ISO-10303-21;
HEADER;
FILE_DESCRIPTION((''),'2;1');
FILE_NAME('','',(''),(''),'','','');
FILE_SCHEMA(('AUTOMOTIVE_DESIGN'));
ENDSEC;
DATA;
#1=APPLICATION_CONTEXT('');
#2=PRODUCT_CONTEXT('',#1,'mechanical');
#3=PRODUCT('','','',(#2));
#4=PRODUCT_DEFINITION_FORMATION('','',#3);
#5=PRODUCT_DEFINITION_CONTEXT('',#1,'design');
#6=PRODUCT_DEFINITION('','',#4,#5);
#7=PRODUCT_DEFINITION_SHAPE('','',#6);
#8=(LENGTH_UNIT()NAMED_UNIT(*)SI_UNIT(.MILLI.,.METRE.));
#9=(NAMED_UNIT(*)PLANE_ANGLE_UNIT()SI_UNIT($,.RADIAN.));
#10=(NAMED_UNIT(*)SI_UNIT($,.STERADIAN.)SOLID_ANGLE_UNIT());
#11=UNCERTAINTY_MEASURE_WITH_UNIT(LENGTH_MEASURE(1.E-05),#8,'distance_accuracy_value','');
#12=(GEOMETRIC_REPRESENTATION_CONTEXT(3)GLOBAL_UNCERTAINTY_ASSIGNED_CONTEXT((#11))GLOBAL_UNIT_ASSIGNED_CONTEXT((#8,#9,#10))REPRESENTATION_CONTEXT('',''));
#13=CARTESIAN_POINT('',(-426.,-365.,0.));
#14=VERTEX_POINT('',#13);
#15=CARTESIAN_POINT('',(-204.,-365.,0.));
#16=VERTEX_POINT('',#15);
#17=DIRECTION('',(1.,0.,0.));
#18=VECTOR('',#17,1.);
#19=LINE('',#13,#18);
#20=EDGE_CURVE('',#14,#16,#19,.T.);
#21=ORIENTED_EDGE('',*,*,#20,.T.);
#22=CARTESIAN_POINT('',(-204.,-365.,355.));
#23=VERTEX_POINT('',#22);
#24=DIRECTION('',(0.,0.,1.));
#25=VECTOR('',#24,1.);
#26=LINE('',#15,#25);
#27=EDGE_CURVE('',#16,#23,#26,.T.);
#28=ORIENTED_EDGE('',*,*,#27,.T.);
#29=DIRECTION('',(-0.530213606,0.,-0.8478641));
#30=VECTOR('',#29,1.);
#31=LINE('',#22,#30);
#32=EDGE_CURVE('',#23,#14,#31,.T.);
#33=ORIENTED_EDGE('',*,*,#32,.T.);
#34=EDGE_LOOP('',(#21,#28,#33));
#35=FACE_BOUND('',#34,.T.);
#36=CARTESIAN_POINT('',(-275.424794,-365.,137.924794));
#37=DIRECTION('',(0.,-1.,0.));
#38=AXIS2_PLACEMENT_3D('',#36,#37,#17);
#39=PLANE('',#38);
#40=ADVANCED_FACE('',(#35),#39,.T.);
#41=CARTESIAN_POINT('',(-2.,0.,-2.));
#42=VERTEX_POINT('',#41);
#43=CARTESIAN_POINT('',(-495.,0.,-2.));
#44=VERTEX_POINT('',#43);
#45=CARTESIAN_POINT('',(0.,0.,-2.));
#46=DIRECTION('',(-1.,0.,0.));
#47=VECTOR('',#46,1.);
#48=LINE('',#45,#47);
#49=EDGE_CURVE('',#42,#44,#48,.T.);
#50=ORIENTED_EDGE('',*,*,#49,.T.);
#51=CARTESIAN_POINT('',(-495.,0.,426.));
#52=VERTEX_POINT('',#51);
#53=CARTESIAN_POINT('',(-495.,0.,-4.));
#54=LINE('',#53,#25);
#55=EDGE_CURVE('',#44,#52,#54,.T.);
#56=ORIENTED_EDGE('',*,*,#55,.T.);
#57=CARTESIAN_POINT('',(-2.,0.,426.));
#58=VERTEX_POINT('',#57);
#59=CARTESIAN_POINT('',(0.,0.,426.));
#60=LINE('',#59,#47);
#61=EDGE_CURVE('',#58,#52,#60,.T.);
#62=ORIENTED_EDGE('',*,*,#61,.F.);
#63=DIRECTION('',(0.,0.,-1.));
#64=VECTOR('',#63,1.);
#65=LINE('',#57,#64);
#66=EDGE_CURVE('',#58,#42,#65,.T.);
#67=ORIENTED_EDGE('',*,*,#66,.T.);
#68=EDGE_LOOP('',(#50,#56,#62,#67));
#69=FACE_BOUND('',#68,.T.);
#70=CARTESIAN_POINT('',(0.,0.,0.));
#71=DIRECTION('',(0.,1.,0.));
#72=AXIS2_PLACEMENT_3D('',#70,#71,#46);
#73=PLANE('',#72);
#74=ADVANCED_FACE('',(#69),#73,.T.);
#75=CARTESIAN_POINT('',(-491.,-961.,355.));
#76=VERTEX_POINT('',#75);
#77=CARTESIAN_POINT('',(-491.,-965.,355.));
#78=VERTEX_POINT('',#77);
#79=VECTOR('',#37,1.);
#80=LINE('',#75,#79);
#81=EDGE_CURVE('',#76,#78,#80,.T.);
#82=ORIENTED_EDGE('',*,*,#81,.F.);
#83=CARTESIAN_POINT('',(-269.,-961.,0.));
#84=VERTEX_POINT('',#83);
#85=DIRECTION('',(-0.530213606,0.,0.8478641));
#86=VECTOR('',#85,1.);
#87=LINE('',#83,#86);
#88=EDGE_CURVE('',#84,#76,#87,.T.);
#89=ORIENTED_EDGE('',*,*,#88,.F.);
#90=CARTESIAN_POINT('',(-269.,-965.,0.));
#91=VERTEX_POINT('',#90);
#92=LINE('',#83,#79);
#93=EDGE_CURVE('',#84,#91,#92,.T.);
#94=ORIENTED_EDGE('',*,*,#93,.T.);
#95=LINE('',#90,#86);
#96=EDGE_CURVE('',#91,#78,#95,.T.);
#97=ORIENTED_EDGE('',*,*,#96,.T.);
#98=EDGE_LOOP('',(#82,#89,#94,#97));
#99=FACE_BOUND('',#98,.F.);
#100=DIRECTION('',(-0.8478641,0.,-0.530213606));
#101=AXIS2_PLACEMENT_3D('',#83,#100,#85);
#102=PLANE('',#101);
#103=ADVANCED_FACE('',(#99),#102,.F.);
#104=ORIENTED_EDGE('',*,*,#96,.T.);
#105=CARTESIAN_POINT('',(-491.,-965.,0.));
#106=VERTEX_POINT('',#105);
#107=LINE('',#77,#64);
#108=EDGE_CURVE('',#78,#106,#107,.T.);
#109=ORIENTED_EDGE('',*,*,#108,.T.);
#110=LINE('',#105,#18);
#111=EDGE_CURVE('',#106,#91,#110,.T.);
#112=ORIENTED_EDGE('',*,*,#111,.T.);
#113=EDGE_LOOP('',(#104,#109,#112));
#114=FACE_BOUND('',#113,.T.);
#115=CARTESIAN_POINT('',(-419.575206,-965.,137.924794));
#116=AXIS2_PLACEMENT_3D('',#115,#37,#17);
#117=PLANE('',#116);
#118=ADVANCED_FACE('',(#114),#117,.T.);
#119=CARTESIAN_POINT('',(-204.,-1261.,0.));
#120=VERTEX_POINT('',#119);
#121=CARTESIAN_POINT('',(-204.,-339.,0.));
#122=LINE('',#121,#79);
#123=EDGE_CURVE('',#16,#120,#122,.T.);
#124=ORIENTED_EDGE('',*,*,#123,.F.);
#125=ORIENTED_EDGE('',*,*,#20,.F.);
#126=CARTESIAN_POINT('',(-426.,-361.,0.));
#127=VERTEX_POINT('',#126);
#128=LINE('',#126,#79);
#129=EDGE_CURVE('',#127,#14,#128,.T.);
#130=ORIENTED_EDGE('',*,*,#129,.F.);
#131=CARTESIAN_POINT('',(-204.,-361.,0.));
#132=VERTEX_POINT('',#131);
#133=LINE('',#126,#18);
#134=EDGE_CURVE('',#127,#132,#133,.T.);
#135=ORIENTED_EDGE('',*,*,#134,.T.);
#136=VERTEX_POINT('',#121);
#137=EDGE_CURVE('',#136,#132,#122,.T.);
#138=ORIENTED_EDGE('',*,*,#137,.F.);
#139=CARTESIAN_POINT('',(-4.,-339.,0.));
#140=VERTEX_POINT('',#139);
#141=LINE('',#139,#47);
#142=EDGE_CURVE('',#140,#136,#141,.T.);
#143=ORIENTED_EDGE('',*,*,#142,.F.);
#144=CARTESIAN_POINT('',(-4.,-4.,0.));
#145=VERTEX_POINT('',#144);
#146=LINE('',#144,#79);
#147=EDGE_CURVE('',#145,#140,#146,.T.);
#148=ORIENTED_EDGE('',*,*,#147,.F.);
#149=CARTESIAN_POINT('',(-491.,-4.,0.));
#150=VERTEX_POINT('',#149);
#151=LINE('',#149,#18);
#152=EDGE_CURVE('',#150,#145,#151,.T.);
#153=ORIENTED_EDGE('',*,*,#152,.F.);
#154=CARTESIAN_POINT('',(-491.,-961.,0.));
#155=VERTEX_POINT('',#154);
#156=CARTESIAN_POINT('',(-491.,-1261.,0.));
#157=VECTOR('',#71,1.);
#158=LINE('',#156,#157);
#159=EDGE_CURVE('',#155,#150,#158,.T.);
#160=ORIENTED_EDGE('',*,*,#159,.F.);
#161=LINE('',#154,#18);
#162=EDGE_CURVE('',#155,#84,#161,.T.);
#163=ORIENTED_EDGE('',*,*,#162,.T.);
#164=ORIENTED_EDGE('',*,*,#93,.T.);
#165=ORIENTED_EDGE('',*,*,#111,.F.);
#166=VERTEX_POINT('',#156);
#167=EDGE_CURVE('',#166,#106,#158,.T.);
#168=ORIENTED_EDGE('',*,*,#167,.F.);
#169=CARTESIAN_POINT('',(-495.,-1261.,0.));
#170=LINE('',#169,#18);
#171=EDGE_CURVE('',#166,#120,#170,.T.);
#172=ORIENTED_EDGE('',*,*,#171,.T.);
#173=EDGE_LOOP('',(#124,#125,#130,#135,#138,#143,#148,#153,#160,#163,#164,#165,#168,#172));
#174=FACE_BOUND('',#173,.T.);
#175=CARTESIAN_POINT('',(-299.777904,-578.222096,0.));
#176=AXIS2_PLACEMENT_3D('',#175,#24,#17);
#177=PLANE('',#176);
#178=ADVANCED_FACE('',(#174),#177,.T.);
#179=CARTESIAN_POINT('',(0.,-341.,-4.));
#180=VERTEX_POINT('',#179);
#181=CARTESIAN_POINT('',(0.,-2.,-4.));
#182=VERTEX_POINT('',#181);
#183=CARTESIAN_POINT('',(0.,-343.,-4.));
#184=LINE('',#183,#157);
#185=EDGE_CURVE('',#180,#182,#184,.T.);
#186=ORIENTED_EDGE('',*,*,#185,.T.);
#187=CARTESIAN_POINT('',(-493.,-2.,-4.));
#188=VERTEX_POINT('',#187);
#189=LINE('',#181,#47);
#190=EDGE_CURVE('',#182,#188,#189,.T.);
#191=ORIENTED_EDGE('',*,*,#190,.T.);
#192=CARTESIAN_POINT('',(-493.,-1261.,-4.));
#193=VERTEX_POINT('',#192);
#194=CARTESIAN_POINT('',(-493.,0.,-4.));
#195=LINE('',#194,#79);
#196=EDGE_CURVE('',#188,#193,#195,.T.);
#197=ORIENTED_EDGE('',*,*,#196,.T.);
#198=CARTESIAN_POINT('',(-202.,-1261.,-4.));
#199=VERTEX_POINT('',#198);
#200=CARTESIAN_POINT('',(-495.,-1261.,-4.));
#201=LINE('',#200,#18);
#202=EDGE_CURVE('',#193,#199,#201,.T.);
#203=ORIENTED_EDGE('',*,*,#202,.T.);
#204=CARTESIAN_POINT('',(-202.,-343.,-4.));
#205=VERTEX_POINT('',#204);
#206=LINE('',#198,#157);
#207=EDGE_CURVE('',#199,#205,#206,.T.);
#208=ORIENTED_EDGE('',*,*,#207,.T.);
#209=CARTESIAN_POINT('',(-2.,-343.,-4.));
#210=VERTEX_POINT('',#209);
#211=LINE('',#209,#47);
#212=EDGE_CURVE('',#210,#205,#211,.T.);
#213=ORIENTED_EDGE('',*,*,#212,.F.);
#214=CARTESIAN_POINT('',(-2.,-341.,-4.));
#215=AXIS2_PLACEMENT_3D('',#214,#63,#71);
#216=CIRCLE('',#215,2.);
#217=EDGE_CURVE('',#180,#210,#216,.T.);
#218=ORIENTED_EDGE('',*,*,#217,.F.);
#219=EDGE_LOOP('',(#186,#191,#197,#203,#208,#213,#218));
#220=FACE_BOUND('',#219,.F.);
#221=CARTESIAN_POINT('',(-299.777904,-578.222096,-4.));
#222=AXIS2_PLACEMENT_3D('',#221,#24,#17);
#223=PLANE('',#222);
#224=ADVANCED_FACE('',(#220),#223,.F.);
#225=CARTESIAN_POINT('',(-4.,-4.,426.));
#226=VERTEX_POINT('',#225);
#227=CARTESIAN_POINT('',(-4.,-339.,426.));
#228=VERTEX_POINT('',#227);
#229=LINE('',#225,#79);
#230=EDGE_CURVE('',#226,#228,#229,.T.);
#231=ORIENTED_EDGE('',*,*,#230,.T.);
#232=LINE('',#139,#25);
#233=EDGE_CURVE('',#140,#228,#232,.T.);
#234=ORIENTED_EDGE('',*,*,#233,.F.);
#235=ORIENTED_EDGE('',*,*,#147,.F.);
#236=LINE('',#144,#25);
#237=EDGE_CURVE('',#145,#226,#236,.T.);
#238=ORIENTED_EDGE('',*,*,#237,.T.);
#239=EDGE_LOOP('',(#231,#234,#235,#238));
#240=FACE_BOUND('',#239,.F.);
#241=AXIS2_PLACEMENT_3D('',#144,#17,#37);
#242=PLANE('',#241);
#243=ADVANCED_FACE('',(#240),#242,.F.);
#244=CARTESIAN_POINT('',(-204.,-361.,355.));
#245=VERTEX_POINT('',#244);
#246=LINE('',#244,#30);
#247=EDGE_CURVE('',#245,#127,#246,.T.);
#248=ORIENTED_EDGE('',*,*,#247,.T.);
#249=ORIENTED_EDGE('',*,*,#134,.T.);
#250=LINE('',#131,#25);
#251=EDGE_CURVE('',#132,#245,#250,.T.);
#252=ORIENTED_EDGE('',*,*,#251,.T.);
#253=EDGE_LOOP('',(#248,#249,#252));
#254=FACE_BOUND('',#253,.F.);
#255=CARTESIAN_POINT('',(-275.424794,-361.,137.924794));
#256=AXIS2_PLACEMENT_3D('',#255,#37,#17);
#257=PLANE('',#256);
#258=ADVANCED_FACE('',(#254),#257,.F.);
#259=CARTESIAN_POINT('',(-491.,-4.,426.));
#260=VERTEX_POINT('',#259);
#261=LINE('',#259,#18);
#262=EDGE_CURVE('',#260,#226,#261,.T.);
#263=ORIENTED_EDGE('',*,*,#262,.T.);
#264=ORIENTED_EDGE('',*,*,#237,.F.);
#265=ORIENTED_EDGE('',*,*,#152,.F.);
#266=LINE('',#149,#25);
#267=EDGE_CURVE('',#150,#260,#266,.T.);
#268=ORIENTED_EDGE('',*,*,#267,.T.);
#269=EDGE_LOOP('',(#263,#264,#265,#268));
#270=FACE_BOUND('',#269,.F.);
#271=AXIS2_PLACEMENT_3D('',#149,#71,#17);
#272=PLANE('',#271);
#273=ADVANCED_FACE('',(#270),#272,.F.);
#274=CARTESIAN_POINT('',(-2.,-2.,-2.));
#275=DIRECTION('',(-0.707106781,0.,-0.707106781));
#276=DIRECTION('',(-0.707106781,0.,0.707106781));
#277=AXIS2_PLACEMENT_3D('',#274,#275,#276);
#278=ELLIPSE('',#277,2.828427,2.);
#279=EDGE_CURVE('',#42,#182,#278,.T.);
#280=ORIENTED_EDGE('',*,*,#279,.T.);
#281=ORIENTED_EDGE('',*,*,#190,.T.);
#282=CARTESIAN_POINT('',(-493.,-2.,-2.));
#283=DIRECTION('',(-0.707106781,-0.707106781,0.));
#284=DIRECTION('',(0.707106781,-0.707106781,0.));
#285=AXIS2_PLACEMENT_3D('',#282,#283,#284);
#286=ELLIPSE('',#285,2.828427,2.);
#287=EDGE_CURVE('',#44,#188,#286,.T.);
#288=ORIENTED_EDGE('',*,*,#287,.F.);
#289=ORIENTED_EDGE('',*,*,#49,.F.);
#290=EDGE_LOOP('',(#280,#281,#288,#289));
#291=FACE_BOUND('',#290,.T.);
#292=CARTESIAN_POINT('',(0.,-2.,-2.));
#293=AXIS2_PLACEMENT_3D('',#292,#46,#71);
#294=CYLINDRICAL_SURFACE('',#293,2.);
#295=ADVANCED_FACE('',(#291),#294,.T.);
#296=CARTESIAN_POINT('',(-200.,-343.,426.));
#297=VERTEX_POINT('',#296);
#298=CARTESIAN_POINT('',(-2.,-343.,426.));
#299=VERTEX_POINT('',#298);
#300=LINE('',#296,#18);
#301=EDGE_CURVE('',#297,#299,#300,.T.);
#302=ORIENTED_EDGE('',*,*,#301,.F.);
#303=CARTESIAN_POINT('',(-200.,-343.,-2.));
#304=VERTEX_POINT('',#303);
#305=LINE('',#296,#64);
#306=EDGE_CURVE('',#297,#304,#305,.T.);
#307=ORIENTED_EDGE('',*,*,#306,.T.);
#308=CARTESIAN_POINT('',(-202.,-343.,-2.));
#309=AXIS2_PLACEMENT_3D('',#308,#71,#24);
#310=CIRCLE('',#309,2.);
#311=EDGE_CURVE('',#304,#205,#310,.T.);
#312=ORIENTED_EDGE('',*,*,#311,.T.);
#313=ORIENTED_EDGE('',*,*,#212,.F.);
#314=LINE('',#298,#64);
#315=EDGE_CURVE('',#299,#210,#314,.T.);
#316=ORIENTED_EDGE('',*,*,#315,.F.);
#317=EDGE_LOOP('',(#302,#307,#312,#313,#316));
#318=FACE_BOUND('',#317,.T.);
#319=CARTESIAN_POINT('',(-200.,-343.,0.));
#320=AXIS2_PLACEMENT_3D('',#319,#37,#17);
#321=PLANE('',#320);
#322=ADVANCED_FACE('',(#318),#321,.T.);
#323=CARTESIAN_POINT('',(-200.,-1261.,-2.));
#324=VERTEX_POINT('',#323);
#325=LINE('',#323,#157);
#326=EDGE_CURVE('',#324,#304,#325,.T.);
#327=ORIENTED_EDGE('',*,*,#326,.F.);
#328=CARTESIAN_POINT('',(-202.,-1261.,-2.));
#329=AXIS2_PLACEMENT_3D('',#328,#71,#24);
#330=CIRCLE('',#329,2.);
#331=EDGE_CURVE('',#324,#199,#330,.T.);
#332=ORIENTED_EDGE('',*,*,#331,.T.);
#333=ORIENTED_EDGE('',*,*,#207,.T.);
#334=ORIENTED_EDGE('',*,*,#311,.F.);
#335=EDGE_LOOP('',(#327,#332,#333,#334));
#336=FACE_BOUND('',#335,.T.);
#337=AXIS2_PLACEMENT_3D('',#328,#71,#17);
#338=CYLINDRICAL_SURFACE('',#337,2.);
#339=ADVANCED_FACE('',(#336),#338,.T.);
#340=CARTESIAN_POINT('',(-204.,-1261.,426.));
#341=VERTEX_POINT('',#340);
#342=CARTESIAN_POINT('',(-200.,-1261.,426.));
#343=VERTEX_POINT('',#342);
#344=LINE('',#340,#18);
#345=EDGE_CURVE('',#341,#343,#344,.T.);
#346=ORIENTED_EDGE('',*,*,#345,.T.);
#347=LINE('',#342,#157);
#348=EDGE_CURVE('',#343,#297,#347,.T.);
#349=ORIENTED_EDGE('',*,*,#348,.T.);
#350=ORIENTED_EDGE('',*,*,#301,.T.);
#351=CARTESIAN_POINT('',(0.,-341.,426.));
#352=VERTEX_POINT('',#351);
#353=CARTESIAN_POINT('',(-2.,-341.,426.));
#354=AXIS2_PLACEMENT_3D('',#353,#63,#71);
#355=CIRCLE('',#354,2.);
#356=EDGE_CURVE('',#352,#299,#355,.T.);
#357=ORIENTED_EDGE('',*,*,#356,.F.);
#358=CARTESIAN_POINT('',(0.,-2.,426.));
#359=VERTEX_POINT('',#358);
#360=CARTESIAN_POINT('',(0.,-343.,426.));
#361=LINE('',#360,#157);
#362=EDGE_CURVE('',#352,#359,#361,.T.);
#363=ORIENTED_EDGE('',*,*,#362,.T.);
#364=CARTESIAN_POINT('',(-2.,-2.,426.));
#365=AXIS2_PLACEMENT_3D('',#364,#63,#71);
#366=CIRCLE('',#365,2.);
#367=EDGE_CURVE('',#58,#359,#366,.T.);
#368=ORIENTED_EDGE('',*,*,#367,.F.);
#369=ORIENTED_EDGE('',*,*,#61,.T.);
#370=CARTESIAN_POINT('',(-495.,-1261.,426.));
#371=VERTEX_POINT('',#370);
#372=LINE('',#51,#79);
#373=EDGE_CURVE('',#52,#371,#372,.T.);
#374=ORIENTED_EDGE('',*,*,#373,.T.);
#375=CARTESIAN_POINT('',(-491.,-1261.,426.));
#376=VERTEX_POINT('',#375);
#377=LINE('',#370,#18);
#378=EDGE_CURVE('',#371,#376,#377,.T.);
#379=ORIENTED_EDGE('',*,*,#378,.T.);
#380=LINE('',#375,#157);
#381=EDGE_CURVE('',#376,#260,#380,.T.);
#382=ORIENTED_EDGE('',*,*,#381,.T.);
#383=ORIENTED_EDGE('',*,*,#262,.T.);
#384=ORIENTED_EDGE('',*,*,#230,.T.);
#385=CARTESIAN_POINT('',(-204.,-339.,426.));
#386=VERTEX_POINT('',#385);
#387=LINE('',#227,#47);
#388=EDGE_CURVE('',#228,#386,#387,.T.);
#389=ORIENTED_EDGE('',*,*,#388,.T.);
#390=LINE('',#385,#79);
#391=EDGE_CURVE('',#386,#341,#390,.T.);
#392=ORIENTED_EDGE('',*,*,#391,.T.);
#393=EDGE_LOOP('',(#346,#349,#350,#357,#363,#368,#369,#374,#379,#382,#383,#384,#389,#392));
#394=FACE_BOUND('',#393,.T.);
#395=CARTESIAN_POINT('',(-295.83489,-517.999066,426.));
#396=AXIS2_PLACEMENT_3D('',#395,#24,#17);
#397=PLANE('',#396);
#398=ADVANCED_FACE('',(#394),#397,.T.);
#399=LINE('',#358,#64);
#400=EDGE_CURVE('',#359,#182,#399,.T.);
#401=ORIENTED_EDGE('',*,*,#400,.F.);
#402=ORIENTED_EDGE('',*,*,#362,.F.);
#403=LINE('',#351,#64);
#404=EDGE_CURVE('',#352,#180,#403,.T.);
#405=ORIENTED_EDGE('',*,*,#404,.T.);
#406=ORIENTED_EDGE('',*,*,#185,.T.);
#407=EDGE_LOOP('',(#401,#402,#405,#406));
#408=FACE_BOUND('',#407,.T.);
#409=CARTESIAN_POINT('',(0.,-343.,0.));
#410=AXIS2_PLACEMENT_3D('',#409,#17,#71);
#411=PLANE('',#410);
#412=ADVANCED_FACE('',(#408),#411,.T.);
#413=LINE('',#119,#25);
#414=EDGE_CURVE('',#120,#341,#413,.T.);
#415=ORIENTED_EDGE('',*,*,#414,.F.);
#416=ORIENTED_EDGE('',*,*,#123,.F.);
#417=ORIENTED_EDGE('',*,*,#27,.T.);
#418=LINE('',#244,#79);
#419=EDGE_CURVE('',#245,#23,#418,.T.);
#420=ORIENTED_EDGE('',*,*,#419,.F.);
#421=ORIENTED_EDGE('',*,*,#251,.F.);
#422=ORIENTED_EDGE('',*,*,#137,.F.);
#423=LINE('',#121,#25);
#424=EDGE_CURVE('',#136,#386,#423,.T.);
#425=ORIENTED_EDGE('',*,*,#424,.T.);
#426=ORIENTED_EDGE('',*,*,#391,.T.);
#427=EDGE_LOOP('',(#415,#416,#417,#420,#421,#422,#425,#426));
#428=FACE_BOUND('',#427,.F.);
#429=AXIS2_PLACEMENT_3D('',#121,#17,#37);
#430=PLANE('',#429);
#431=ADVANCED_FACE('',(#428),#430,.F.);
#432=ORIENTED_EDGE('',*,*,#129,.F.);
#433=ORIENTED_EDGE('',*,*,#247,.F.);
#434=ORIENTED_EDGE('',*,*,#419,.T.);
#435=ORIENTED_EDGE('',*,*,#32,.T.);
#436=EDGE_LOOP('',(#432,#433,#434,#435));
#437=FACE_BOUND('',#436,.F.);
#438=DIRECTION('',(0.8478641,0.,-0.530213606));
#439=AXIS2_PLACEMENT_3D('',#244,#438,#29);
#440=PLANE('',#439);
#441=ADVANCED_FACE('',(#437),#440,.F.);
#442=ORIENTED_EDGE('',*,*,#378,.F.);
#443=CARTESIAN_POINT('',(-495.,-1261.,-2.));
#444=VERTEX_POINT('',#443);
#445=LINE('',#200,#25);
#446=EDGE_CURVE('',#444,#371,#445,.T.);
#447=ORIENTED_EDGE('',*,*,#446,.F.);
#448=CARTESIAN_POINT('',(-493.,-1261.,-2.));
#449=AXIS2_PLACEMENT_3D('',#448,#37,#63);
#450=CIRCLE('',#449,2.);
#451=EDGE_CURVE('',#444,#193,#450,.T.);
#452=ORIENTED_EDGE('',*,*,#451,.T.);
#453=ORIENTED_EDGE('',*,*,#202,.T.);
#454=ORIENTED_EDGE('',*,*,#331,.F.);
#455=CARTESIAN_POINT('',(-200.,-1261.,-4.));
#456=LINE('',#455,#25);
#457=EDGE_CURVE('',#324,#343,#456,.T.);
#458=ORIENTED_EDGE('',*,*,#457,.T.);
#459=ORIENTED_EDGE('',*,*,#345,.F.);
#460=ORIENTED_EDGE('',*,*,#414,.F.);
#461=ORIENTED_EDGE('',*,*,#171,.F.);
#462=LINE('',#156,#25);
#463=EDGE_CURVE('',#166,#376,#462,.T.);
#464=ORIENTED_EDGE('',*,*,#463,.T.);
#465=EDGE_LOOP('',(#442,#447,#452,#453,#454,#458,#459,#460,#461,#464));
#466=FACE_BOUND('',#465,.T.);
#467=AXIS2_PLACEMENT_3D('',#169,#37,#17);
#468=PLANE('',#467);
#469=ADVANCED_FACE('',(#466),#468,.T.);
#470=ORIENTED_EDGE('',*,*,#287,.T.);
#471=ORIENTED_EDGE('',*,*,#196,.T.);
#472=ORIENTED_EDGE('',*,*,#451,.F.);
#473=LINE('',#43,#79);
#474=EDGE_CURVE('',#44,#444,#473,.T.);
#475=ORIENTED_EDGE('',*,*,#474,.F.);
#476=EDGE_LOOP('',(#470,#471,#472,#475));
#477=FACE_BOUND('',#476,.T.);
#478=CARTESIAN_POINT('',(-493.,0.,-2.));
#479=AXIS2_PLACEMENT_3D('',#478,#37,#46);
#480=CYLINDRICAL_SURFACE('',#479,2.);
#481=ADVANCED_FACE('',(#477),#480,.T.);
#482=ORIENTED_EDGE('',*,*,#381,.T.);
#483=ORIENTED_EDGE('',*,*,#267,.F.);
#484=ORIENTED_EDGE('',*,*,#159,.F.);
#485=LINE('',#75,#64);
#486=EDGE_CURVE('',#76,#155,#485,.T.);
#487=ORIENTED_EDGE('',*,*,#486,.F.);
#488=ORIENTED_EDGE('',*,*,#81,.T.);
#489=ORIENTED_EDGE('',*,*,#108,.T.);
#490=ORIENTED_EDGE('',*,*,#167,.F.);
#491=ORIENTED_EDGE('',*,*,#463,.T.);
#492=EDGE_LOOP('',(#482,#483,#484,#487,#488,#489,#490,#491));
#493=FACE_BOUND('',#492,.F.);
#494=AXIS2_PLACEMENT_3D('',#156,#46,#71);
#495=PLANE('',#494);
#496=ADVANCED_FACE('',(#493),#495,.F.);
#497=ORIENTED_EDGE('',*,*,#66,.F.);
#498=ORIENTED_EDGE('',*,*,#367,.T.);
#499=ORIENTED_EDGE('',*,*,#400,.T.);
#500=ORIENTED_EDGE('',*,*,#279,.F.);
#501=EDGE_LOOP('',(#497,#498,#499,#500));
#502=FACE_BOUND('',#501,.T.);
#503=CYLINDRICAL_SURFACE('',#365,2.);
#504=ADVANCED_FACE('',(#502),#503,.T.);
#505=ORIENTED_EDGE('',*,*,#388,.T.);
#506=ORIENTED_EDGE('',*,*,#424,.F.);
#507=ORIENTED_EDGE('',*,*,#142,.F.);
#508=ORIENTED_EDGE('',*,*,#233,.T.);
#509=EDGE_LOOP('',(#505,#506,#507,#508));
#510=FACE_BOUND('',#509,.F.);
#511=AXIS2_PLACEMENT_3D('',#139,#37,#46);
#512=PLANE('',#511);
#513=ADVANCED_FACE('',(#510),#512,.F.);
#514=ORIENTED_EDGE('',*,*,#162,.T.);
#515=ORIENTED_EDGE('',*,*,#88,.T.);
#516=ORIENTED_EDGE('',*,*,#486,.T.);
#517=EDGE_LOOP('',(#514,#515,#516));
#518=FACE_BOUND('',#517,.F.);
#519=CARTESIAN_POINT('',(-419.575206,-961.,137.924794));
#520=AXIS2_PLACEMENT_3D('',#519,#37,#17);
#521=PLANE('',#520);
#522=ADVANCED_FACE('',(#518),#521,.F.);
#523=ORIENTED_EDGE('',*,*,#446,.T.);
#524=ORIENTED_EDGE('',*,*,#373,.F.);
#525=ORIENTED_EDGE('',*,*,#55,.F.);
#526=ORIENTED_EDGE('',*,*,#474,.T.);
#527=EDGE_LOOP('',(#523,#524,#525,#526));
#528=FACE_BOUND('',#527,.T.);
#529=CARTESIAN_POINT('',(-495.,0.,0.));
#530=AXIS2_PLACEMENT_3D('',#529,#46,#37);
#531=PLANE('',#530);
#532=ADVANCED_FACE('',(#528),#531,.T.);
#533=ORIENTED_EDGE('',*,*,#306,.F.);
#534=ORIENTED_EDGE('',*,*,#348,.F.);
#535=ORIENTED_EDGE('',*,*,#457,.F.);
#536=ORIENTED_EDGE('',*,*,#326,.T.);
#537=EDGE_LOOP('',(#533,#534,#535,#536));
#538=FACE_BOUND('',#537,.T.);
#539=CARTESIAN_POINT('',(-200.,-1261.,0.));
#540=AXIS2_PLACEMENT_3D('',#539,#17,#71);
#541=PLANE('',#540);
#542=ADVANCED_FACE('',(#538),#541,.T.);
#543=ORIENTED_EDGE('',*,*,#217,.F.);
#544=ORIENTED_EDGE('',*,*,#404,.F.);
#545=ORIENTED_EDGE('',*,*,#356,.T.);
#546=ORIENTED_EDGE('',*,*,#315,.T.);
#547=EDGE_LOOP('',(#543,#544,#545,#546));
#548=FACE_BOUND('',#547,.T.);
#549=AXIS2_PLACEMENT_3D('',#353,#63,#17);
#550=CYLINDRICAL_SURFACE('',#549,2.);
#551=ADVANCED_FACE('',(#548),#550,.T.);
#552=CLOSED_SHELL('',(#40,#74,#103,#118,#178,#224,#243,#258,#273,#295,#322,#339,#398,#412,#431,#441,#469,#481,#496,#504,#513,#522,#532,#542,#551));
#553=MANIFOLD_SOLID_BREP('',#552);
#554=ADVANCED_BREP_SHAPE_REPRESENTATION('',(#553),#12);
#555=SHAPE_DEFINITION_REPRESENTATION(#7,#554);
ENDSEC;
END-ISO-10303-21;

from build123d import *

# Parameters (mm, degrees)
F1_DEPTH  = 426
F3_DEPTH  = 4
F4_R      = 2
F7_DEPTH  = 4
F10_DEPTH = 4


# Not quite as in the source:
# - a feature names something its author has since deleted; it is built from what else it names


with BuildPart() as f1:
    # F0 (on Top) → F1 (new body)
    with BuildSketch(Plane.XY):
        Polygon((-200, -343), (0, -343), (0, 0), (-495, 0), (-495, -1261), (-491, -1261), (-491, -4), (-4, -4), (-4, -339), (-204, -339), (-204, -1261), (-200, -1261), align=None)
    extrude(amount=F1_DEPTH)

    # F2 (on Top) → F3 (join)
    with BuildSketch(Plane.XY):
        Polygon((0, 0), (-495, 0), (-495, -1261), (-200, -1261), (-200, -343), (0, -343), align=None)
    extrude(amount=-F3_DEPTH)

    # F4
    f4_edges = [f1.edges().sort_by_distance(p)[0] for p in [
        (-200, -802, -4),
        (-495, -630.5, -4),
        (-247.5, 0, -4),
        (0, -343, 211),
        (0, 0, 211),
    ]]
    fillet(f4_edges, radius=F4_R)

    # F6 (on offset) → F7 (join)
    with BuildSketch(Plane.XZ.offset(961)):
        Polygon((-491, 355), (-491, 0), (-269, 0), align=None)
    extrude(amount=F7_DEPTH)

    # F9 (on offset) → F10 (join)
    with BuildSketch(Plane.XZ.offset(361)):
        Polygon((-426, 0), (-204, 0), (-204, 355), align=None)
    extrude(amount=F10_DEPTH)


solid = f1.part
